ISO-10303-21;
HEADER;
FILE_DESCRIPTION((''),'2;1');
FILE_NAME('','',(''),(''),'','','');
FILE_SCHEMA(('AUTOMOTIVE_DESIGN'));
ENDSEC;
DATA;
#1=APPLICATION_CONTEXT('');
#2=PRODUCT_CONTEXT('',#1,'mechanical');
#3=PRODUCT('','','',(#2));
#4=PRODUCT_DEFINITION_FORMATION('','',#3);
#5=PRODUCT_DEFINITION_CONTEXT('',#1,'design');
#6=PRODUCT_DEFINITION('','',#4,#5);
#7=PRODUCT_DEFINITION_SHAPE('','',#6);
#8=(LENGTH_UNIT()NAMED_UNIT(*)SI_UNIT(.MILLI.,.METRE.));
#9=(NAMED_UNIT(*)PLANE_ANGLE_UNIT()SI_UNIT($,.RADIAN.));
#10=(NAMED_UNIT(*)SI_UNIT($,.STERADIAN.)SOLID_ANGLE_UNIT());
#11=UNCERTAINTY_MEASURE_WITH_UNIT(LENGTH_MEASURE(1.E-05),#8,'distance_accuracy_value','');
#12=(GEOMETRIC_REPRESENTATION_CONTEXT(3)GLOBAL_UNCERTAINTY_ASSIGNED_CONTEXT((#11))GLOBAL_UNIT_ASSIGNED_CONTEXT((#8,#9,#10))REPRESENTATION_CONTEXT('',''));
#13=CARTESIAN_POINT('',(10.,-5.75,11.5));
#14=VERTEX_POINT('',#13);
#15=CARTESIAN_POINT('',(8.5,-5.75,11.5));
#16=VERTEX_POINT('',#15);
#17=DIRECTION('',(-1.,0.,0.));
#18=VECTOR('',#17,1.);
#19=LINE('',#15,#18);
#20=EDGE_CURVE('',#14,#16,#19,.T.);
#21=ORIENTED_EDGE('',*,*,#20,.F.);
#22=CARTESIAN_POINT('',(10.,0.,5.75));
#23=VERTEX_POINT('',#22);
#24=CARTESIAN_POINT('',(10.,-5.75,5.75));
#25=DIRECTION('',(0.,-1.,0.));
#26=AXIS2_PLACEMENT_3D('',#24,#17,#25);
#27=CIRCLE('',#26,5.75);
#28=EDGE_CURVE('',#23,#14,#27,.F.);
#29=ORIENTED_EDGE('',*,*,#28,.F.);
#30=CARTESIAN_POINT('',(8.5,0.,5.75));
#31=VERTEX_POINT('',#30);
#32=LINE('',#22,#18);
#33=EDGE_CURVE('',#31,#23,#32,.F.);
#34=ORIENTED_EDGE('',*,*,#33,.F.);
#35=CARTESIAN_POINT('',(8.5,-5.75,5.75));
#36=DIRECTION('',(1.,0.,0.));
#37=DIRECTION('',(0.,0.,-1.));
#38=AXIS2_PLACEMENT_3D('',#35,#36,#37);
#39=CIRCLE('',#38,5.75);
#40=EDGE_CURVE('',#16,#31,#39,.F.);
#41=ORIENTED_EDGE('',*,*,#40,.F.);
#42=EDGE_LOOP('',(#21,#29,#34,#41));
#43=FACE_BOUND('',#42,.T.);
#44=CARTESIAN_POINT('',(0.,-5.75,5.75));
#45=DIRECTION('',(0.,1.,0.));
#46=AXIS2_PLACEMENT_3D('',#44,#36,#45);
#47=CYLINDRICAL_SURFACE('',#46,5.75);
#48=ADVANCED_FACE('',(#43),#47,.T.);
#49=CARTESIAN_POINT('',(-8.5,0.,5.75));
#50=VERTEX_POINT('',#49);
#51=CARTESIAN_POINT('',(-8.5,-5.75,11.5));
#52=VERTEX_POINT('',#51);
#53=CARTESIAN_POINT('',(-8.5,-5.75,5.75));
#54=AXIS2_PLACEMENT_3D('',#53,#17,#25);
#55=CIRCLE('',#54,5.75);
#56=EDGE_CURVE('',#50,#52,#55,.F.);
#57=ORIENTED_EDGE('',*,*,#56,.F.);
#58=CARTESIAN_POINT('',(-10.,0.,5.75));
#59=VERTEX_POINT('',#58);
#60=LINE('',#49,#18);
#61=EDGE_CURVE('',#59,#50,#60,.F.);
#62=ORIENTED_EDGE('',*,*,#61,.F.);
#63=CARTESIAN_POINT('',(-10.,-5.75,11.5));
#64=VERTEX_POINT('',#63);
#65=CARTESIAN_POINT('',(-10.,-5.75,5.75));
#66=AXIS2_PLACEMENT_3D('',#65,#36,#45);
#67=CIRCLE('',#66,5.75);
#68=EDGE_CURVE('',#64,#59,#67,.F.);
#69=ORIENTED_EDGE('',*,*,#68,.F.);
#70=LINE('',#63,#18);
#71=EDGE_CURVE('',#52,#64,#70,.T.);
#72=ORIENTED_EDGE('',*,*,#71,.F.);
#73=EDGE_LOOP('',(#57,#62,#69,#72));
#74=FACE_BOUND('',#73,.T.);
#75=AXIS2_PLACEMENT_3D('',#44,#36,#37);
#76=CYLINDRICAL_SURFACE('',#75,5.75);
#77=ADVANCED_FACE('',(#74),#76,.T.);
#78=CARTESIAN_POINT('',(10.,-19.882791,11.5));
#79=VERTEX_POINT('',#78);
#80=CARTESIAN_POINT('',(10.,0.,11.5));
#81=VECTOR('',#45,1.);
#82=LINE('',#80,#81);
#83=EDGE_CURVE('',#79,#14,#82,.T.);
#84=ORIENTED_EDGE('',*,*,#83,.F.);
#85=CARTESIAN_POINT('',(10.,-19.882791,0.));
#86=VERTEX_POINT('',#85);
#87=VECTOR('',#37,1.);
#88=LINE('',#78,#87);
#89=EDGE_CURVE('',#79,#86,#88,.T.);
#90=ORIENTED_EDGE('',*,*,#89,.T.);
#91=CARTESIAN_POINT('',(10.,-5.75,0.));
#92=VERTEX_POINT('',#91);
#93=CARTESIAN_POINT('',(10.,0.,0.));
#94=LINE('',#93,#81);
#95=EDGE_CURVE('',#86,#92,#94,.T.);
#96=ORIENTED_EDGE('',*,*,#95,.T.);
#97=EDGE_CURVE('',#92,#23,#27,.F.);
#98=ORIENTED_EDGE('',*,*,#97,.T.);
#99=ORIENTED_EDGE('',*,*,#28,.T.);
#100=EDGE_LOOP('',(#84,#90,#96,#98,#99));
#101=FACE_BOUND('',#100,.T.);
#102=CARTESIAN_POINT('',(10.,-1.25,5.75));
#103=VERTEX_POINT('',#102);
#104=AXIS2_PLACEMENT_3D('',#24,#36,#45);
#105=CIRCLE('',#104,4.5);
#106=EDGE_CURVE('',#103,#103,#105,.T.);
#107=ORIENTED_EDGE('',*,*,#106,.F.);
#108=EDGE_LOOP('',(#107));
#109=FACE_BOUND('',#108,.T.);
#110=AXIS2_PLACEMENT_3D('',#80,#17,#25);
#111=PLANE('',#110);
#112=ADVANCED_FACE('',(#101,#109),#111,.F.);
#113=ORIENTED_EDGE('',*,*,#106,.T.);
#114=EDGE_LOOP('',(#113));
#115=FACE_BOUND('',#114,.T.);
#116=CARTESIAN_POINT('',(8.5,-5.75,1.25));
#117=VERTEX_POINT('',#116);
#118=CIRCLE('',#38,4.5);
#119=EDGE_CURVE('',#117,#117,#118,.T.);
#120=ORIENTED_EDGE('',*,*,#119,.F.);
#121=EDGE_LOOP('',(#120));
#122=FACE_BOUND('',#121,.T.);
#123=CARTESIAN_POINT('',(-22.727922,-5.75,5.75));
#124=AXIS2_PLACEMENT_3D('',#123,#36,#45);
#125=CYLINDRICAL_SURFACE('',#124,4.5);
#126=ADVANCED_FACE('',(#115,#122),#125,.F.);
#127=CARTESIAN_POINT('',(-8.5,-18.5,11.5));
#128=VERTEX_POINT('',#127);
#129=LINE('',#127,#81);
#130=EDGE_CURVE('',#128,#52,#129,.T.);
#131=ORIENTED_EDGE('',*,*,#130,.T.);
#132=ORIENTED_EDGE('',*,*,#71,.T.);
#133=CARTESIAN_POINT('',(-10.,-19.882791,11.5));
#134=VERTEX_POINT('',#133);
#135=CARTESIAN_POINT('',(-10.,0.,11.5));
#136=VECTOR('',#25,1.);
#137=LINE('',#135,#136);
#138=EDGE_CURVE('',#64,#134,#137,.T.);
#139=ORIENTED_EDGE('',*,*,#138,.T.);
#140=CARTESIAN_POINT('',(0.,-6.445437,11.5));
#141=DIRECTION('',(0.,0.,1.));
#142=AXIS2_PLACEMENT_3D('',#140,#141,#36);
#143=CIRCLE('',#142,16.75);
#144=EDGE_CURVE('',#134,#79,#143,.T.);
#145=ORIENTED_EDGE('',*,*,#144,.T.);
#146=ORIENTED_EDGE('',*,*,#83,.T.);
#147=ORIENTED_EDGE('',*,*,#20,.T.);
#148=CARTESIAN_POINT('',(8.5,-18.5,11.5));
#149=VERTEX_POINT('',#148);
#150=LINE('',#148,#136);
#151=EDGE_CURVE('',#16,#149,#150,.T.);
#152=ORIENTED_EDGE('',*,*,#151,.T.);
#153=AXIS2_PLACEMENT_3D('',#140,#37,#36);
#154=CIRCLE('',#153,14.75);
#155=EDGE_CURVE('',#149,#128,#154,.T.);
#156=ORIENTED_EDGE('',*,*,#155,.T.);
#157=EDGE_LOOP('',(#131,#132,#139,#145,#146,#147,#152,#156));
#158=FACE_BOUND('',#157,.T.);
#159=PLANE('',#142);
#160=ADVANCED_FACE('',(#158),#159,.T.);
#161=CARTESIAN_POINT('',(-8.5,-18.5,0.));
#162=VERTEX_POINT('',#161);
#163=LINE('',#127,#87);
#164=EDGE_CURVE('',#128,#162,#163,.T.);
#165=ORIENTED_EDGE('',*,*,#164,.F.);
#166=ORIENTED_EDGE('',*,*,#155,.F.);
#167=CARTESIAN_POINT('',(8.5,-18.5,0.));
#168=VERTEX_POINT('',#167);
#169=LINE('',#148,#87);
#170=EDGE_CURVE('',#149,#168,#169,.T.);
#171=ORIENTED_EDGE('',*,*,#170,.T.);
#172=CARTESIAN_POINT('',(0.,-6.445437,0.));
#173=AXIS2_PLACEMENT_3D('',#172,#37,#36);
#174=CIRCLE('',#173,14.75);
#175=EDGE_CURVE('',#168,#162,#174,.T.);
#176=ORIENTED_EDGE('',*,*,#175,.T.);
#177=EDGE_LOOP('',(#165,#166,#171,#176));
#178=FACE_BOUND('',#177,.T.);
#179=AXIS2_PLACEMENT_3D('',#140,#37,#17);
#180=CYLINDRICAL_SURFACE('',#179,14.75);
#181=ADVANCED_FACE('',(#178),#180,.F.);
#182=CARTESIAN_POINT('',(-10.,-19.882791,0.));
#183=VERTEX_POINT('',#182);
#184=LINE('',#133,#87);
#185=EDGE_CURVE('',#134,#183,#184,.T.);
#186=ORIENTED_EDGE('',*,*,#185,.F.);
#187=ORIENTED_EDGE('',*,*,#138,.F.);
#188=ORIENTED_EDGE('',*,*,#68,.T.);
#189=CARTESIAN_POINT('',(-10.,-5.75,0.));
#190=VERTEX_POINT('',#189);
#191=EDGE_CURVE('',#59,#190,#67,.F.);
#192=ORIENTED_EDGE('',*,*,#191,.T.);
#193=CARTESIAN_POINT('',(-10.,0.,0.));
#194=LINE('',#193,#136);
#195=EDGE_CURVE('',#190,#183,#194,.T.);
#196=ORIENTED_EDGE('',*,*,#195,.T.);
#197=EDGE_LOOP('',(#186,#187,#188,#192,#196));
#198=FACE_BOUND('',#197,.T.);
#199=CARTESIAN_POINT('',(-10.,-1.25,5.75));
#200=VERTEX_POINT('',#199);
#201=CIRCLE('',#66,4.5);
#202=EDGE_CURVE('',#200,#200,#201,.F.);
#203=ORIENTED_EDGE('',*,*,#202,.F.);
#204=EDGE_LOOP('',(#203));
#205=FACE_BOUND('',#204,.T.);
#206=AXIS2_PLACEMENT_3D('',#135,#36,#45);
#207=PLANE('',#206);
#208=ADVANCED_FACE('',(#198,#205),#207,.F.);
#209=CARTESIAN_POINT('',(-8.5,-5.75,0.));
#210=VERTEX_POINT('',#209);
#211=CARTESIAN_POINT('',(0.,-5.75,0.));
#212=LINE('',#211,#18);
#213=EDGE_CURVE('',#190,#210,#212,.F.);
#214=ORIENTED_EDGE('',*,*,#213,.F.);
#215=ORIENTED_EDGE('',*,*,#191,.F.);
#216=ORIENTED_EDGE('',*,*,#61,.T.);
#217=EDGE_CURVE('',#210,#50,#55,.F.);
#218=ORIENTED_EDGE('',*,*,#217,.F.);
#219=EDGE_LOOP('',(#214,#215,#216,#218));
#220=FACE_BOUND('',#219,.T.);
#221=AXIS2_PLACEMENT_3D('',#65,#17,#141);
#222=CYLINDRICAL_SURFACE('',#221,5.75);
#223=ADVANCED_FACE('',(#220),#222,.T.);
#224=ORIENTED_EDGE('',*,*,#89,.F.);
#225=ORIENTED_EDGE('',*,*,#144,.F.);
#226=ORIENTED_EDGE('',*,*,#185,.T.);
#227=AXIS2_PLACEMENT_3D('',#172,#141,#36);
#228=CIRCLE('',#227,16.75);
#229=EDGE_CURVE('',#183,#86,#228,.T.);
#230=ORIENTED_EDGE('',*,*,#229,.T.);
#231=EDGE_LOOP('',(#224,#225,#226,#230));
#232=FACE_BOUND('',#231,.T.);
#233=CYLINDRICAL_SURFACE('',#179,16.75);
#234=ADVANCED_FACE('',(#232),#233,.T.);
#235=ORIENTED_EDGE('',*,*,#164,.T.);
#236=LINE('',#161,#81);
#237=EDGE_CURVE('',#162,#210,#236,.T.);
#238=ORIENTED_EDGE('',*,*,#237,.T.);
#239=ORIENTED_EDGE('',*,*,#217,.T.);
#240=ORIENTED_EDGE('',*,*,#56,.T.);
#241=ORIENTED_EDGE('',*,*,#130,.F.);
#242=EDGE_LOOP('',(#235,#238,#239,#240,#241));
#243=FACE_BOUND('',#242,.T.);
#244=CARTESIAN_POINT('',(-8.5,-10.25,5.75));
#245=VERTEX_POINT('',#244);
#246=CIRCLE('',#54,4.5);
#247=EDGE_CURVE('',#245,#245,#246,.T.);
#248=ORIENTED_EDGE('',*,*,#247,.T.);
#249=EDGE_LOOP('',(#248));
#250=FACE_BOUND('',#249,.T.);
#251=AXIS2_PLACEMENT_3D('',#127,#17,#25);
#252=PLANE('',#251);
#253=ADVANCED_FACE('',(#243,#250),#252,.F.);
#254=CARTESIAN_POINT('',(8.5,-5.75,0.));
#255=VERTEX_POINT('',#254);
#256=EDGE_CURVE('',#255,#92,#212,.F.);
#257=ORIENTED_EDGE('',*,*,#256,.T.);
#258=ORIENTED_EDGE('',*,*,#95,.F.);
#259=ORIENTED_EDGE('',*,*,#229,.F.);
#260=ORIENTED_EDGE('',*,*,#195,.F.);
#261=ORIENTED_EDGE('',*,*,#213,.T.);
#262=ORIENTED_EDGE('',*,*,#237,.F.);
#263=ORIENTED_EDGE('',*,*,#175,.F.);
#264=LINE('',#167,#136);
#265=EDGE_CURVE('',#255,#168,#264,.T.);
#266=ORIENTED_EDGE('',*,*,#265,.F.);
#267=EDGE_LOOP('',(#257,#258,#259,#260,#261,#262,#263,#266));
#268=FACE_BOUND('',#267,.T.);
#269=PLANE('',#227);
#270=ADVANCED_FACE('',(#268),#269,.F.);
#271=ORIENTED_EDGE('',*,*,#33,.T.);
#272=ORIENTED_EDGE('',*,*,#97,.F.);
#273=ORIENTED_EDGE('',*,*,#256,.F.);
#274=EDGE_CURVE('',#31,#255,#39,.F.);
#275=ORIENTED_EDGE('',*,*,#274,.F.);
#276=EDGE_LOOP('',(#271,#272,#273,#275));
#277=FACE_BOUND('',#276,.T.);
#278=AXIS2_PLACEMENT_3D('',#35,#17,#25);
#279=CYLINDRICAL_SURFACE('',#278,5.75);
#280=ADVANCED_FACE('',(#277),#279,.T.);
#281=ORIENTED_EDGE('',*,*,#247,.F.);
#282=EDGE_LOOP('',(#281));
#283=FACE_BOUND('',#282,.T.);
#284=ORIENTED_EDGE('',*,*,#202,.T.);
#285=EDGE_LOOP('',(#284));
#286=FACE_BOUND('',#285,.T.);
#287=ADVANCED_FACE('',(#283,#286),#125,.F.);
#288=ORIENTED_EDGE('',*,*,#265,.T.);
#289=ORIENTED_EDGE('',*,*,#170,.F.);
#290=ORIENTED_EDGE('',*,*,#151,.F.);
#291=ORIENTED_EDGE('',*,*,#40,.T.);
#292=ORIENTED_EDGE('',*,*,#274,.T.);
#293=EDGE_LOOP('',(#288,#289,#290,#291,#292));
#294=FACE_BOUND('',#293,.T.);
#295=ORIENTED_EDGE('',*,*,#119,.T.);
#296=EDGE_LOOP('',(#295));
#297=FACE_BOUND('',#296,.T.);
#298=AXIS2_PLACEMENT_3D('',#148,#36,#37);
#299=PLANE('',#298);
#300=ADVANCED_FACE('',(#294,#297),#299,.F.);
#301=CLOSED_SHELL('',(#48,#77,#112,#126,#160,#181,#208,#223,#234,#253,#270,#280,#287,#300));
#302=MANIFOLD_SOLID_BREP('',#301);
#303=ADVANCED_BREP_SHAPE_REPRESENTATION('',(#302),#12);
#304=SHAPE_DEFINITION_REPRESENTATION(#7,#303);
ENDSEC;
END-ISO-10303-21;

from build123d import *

# Parameters (mm, degrees)
BOSS_EXTRU_1_DEPTH      = 11.5
ENL_V_MAT_EXTRU_1_REACH = 34.715
ESQUISSE3_R             = 4.5
CONG_1_R                = 5.75


with BuildPart() as part:
    # Esquisse1 → Boss.-Extru.1 (new body)
    with BuildSketch(Plane.XY):
        with BuildLine():
            Line((-10, 0), (-8.5, 0))
            Line((-8.5, 0), (-8.5, -18.5))
            ThreePointArc((-8.5, -18.5), (0, -21.195436549), (8.5, -18.5))
            Line((8.5, -18.5), (8.5, 0))
            Line((8.5, 0), (10, 0))
            Line((10, 0), (10, -19.882791199))
            ThreePointArc((10, -19.882791199), (0, -23.195436549), (-10, -19.882791199))
            Line((-10, -19.882791199), (-10, 0))
        make_face()
    extrude(amount=BOSS_EXTRU_1_DEPTH)

    # Enlèv. mat.-Extru.1: up to this face of the body (flat: up to its plane)
    enl_v_mat_extru_1_end = Plane(part.part.faces().sort_by_distance((-10, -9.9413956, 5.75))[0])
    # Esquisse3 → Enlèv. mat.-Extru.1 (cut, up to the picked face)
    with BuildSketch(Plane(origin=(10, 0, 0), x_dir=(0, 0, -1), z_dir=(1, 0, 0)), mode=Mode.PRIVATE) as enl_v_mat_extru_1_sk1:
        with Locations(Location((-5.75, -5.75, 0), (0, 0, 90))):
            Circle(ESQUISSE3_R)
    enl_v_mat_extru_1_tool1 = split(extrude(enl_v_mat_extru_1_sk1.sketch, amount=-ENL_V_MAT_EXTRU_1_REACH, mode=Mode.PRIVATE), bisect_by=enl_v_mat_extru_1_end, keep=Keep.BOTH, mode=Mode.PRIVATE)
    add(enl_v_mat_extru_1_tool1.solids().sort_by(Axis((10, -5.75, 5.75), (-1, 0, 0)))[0], mode=Mode.SUBTRACT)

    # Congé1
    cong_1_edges = [part.edges().sort_by_distance(p)[0] for p in [
        (-9.25, 0, 0),
        (-9.25, 0, 11.5),
        (9.25, 0, 0),
        (9.25, 0, 11.5),
    ]]
    fillet(cong_1_edges, radius=CONG_1_R - 0.0001)  # a hair under: the kernel refuses the full size


solid = part.part
